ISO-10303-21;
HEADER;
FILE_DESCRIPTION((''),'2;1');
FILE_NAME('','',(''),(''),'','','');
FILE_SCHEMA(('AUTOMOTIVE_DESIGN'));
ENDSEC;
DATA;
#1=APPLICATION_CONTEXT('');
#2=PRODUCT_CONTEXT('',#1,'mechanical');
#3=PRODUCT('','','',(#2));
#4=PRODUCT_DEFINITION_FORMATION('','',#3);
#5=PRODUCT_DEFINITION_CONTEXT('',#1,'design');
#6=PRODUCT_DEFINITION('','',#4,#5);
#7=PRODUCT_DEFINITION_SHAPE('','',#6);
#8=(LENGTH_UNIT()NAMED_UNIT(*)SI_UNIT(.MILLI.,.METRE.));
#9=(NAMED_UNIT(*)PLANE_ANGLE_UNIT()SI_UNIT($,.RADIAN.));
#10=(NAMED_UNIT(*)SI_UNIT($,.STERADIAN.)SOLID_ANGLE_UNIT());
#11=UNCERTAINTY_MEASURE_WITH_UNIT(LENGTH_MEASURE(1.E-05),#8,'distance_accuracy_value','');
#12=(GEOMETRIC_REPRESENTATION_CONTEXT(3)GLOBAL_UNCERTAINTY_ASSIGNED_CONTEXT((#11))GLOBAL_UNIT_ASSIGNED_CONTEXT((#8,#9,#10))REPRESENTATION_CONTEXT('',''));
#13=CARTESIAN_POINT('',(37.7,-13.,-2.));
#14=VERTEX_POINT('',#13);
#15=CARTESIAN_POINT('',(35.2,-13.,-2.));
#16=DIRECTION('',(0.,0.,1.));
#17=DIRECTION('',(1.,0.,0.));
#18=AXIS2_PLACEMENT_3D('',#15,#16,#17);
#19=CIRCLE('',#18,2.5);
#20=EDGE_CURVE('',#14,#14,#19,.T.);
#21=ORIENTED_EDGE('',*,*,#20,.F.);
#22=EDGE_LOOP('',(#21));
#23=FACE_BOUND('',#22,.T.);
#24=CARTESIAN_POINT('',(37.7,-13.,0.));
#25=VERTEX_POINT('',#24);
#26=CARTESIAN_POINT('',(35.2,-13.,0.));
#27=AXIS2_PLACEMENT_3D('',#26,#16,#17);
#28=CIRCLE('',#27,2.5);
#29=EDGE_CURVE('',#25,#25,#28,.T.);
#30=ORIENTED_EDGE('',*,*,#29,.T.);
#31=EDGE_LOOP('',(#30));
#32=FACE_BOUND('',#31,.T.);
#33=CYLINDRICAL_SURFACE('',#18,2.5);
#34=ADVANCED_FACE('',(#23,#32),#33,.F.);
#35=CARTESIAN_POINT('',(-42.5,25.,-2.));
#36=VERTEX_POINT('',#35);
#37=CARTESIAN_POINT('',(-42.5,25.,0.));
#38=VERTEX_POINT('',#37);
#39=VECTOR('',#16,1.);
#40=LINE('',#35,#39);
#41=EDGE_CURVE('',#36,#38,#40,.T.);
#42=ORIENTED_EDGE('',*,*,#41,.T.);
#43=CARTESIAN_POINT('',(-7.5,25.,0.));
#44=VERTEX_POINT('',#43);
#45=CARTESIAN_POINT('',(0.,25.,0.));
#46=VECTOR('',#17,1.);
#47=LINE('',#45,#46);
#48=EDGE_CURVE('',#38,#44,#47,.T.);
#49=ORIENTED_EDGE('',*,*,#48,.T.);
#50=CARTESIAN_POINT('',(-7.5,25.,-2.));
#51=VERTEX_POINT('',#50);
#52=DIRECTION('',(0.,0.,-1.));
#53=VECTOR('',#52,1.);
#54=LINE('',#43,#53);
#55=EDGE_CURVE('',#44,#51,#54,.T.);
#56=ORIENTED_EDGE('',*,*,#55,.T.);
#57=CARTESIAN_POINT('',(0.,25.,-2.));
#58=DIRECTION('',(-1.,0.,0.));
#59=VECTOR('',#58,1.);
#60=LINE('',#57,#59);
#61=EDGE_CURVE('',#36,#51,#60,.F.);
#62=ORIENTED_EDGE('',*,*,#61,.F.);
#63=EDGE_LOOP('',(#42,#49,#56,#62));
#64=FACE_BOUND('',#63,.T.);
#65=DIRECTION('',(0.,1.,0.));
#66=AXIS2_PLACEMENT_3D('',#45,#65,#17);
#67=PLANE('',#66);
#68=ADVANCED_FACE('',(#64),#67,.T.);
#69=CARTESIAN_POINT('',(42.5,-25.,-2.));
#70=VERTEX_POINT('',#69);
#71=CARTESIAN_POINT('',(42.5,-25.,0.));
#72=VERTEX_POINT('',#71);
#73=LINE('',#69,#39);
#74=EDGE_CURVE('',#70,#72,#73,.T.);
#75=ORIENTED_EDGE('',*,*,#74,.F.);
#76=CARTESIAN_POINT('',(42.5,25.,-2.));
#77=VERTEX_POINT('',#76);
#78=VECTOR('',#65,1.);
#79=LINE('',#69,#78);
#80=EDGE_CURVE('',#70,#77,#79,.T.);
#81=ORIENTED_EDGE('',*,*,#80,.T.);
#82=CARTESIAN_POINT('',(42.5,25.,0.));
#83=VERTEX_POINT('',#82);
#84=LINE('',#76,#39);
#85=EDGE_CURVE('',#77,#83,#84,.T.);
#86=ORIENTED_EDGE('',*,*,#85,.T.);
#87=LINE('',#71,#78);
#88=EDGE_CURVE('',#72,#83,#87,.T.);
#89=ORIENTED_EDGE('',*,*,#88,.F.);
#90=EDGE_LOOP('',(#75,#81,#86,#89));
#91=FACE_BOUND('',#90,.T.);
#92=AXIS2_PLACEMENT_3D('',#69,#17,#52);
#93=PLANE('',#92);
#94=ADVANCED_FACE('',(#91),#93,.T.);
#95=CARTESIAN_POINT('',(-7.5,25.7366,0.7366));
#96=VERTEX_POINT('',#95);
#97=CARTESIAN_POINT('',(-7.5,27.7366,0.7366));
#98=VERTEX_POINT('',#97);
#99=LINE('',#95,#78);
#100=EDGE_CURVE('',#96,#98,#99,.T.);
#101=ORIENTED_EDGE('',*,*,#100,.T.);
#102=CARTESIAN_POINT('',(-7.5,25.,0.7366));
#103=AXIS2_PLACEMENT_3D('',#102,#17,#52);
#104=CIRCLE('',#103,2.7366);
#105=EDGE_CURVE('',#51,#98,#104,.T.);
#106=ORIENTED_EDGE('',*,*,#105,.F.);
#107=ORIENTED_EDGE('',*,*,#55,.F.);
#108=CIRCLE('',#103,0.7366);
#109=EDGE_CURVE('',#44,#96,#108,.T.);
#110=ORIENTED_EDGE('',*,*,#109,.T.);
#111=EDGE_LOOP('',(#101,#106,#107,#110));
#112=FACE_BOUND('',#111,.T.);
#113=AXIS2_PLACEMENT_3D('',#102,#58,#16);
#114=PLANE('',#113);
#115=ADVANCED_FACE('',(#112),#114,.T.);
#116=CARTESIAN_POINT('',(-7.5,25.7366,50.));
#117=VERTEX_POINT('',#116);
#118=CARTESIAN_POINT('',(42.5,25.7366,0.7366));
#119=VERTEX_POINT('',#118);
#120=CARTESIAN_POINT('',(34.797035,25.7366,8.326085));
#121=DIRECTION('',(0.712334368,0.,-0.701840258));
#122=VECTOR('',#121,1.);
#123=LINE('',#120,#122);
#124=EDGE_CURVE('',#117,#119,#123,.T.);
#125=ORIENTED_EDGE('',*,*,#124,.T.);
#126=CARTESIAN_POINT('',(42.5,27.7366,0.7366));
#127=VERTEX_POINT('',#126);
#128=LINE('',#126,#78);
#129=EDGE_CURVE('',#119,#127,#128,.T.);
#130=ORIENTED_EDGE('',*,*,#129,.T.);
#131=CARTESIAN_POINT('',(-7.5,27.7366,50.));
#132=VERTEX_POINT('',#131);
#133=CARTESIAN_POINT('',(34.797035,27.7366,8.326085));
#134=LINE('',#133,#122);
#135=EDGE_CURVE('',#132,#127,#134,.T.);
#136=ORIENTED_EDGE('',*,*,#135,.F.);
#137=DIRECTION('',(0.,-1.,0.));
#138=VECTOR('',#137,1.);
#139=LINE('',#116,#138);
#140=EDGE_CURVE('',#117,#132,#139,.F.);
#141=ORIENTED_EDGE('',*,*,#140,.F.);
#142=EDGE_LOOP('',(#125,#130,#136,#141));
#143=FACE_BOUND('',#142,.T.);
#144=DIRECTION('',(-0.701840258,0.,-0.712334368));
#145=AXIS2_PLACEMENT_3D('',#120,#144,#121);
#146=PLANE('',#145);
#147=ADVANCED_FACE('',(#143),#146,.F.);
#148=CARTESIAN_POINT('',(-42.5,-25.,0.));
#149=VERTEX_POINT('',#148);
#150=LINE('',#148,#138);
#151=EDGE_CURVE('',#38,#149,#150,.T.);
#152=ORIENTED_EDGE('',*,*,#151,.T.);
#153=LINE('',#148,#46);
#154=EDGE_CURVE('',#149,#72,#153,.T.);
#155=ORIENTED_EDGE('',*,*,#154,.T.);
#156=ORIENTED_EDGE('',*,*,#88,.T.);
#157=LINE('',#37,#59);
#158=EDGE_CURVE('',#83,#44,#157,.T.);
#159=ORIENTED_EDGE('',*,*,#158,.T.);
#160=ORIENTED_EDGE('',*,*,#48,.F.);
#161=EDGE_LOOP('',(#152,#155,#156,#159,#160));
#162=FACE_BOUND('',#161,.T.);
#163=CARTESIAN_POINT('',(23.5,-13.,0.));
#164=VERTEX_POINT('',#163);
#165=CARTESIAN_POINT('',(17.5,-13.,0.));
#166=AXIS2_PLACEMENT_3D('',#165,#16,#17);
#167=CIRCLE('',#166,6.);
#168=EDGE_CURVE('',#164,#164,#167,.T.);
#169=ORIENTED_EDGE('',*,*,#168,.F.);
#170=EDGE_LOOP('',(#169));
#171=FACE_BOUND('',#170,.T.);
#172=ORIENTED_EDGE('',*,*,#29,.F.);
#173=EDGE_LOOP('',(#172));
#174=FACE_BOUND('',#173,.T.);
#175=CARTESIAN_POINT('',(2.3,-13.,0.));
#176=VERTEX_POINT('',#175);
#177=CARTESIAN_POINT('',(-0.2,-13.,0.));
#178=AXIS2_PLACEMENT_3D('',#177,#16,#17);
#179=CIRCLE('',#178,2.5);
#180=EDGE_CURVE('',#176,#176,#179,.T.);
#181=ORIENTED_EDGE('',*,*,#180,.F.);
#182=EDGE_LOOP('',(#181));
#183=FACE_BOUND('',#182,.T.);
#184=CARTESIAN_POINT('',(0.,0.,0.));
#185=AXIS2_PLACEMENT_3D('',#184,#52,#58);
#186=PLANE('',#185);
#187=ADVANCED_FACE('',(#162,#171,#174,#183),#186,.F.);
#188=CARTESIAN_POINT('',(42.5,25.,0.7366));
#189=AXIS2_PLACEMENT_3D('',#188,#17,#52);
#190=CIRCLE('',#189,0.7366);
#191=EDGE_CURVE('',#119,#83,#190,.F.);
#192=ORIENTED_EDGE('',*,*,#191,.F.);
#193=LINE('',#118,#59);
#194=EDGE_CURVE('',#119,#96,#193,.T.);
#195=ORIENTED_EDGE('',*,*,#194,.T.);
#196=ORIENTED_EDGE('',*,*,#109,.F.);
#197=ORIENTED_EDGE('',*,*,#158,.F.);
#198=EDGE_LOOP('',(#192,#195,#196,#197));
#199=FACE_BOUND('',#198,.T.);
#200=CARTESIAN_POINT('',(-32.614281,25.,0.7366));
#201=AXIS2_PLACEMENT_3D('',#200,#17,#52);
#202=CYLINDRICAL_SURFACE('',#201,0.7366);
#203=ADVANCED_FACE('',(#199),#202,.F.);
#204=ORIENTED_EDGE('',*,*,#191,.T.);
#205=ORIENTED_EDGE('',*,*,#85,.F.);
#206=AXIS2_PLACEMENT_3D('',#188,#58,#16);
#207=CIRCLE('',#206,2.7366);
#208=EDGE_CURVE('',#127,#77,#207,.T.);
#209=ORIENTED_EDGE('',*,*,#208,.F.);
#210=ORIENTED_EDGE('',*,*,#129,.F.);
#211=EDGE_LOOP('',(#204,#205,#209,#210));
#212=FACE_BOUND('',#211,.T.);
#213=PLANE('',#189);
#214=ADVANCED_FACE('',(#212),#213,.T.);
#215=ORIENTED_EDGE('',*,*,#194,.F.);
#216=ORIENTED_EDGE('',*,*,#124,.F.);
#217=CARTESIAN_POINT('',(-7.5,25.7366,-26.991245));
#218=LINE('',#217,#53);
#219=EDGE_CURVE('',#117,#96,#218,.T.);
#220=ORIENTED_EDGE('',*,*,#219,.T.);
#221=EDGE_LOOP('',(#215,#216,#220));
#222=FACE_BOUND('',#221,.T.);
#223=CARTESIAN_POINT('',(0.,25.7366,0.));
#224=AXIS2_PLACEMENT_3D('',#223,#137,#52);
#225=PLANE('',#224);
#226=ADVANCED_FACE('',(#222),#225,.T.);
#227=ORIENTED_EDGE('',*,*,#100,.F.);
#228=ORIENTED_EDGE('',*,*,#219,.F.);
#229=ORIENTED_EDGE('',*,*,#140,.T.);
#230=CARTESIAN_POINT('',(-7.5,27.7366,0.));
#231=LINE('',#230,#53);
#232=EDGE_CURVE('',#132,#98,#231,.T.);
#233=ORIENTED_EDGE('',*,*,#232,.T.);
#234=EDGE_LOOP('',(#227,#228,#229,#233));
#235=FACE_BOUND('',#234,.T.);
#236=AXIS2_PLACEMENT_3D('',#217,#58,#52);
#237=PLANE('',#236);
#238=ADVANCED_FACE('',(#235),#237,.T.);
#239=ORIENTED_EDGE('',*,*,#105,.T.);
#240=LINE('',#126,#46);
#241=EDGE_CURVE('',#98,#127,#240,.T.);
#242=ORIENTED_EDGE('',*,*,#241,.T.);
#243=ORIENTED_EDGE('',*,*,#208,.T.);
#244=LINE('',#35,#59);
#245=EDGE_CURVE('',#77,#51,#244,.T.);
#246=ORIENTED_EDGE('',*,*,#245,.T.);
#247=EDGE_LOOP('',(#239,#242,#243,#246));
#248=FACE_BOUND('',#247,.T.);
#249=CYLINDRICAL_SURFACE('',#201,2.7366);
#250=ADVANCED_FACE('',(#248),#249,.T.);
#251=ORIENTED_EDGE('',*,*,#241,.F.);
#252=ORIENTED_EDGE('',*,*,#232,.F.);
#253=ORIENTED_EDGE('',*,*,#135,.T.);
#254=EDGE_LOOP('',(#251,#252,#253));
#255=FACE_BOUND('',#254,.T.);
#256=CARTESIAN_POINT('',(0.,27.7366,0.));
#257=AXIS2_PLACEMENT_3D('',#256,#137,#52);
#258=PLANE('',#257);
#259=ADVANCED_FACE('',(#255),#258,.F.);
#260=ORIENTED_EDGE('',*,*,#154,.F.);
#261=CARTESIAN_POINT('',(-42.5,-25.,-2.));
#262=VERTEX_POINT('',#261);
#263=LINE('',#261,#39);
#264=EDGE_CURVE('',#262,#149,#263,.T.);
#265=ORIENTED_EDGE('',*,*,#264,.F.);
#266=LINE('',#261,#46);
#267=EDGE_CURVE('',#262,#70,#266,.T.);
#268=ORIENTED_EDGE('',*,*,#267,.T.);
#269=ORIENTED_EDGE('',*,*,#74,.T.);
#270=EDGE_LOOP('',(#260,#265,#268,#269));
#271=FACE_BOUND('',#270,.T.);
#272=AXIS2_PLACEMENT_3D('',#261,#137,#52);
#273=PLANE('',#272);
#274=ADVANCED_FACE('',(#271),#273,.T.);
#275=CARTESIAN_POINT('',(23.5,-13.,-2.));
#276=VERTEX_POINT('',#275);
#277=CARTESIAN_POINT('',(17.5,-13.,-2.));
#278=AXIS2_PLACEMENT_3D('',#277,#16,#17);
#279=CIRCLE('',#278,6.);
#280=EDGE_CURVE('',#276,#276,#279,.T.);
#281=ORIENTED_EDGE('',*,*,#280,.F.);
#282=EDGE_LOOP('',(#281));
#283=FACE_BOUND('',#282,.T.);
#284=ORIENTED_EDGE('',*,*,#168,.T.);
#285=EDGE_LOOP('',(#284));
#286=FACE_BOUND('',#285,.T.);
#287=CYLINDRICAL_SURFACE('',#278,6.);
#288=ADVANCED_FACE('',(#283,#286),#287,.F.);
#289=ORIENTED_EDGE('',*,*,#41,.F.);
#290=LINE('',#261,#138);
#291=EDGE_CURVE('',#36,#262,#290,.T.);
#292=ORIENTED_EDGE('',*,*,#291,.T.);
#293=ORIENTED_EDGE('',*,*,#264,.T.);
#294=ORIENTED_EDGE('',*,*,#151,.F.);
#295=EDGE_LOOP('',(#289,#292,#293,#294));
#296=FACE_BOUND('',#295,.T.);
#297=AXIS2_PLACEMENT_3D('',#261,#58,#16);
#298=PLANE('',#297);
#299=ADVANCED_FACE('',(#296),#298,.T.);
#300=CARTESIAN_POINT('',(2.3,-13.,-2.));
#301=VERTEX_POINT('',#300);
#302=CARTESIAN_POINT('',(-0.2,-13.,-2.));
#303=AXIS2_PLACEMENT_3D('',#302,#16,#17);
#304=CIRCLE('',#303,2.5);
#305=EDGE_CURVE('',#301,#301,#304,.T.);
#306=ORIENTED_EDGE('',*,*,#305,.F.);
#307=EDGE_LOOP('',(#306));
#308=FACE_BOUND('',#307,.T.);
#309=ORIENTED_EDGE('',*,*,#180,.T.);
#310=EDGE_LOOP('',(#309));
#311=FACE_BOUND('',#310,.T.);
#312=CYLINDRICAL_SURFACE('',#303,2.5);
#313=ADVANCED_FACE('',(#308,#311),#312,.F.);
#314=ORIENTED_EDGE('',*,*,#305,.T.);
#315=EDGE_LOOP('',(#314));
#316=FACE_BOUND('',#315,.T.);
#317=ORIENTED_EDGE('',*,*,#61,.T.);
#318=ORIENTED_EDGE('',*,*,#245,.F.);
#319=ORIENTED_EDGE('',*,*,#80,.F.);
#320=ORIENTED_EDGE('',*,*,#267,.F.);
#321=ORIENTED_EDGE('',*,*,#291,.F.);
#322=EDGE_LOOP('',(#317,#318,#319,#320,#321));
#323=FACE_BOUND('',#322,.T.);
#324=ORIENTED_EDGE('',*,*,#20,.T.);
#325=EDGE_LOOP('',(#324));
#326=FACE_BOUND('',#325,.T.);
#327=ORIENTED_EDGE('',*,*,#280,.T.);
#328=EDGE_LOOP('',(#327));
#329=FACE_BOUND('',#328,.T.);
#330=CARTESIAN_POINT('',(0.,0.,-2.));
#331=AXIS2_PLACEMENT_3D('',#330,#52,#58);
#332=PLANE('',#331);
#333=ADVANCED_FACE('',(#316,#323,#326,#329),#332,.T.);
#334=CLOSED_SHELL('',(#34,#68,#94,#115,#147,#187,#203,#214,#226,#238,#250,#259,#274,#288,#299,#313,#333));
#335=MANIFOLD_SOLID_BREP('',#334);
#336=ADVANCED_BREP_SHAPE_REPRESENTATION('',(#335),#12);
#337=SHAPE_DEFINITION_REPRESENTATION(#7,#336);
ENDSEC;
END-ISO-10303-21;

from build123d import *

# Parameters (mm, degrees)
CROQUIS1_W             = 85
CROQUIS1_H             = 50
BRIDA_BASE1_DEPTH      = 2
BRIDA_DE_ARISTA1_DEPTH = 85
DESDOBLAR1_START       = -42.5
DESDOBLAR1_DEPTH       = 85
DESDOBLAR1_2_DEPTH     = 85
CROQUIS11_W            = 35
CROQUIS11_H            = 49.2634
CROQUIS11_H_2          = 2.727844901
CORTAR_EXTRUIR1_DEPTH  = 10
DOBLAR1_START          = 27.727844901
DOBLAR1_OUTLINE_W      = 50
DOBLAR1_OUTLINE_H      = 2
DOBLAR1_DEPTH          = 50.272155099
DOBLAR1_START_2        = 25.7366
DOBLAR1_2_DEPTH        = 1.725934706
DOBLAR1_START_3        = 25
DOBLAR1_3_DEPTH        = 2.7366
DOBLAR1_START_4        = -7.5
DOBLAR1_4_DEPTH        = 50.5
CROQUIS12_R            = 6
CROQUIS12_R_2          = 2.5
CORTAR_EXTRUIR2_DEPTH  = 10


with BuildPart() as part:
    # Brida base1: sheet metal written as solids
    # Croquis1 → Brida base1 (new body)
    with BuildSketch(Plane.XY):
        Rectangle(CROQUIS1_W, CROQUIS1_H)
    extrude(amount=-BRIDA_BASE1_DEPTH)

    # Brida de arista1: sheet metal written as solids
    # Brida de arista1 section (on a plane across the edge) → Brida de arista1 (add)
    with BuildSketch(Plane(origin=(42.5, 25.7366, 0), x_dir=(0, -1, 0), z_dir=(-1, 0, 0))):
        with BuildLine():
            Line((-2, 0.7366), (-2, 50))
            Line((-2, 50), (0, 50))
            Line((0, 50), (0, 0.7366))
            ThreePointArc((0, 0.7366), (0.215745145, 0.215745145), (0.7366, 0))
            Line((0.7366, 0), (0.7366, -2))
            ThreePointArc((0.7366, -2), (-1.198468417, -1.198468417), (-2, 0.7366))
        make_face()
    extrude(amount=BRIDA_DE_ARISTA1_DEPTH)

    # Desdoblar1: read off the stored shape, not the designer's step
    # Desdoblar1 outline → Desdoblar1 (cut)
    with BuildSketch(Plane.YZ.offset(DESDOBLAR1_START)):
        with BuildLine():
            Line((25, 0), (27.635602398, 0))
            ThreePointArc((27.635602398, 0), (27.711233029, 0.364854094), (27.7366, 0.7366))
            Line((27.7366, 0.7366), (27.7366, 50))
            Line((27.7366, 50), (25.7366, 50))
            Line((25.7366, 50), (25.7366, 0.7366))
            ThreePointArc((25.7366, 0.7366), (25.520854855, 0.215745145), (25, 0))
        make_face()
    extrude(amount=DESDOBLAR1_DEPTH, mode=Mode.SUBTRACT)

    # Desdoblar1 2 outline → Desdoblar1 2 (add)
    with BuildSketch(Plane.YZ.offset(DESDOBLAR1_START)):
        with BuildLine():
            Line((25, -2), (76.991244901, -2))
            Line((76.991244901, -2), (76.991244901, 0))
            Line((76.991244901, 0), (27.635602398, 0))
            ThreePointArc((27.635602398, 0), (26.654267209, -1.443395312), (25, -2))
        make_face()
    extrude(amount=DESDOBLAR1_2_DEPTH)

    # Croquis11 → Cortar-Extruir1 (cut)
    with BuildSketch(Plane.XY):
        with Locations((-25, 52.359544901)):
            Rectangle(CROQUIS11_W, CROQUIS11_H)
        with Locations((-25, 26.36392245)):
            Rectangle(CROQUIS11_W, CROQUIS11_H_2)
        Polygon((42.5, 76.991244901), (-7.5, 76.991244901), (42.5, 27.727844901), align=None)
    extrude(amount=-CORTAR_EXTRUIR1_DEPTH, mode=Mode.SUBTRACT)

    # Doblar1: read off the stored shape, not the designer's step
    # Doblar1 outline → Doblar1 (cut)
    with BuildSketch(Plane(origin=(0, 0, 0), x_dir=(1, 0, 0), z_dir=(0, 1, 0)).offset(DOBLAR1_START)):
        with Locations((17.5, 1)):
            Rectangle(DOBLAR1_OUTLINE_W, DOBLAR1_OUTLINE_H)
    extrude(amount=DOBLAR1_DEPTH, mode=Mode.SUBTRACT)

    # Doblar1 2 outline → Doblar1 2 (add)
    with BuildSketch(Plane(origin=(0, 0, 0), x_dir=(1, 0, 0), z_dir=(0, 1, 0)).offset(DOBLAR1_START_2)):
        Polygon((-7.5, -50), (42.5, -0.7366), (42.5, 0), (-7.5, 0), align=None)
    extrude(amount=DOBLAR1_2_DEPTH)

    # Doblar1 3 outline → Doblar1 3 (add)
    with BuildSketch(Plane(origin=(0, 0, 0), x_dir=(1, 0, 0), z_dir=(0, 1, 0)).offset(DOBLAR1_START_3)):
        Polygon((-7.5, 0), (-7.5, -50), (42.5, -0.7366), (42.5, 0), align=None)
    extrude(amount=DOBLAR1_3_DEPTH)

    # Doblar1 4 outline → Doblar1 4 (cut)
    with BuildSketch(Plane.YZ.offset(DOBLAR1_START_4)):
        with BuildLine():
            ThreePointArc((27.7366, 0.7366), (26.935068417, -1.198468417), (25, -2))
            Line((25, -2), (24, -2))
            Line((24, -2), (24, -4))
            Line((24, -4), (27.727844901, -4))
            Line((27.727844901, -4), (27.727844901, 0))
            Line((27.727844901, 0), (29, 0))
            Line((29, 0), (29, 52))
            Line((29, 52), (27.736600025, 52))
            Line((27.736600025, 52), (27.7366, 0.7366))
        make_face()
        with BuildLine():
            Line((25.7366, 0.7366), (25.7366, 52))
            Line((25.7366, 52), (25, 52))
            Line((25, 52), (25, 0))
            ThreePointArc((25, 0), (25.520854855, 0.215745145), (25.7366, 0.7366))
        make_face()
    extrude(amount=DOBLAR1_4_DEPTH, mode=Mode.SUBTRACT)

    # Croquis12 → Cortar-Extruir2 (cut)
    with BuildSketch(Plane.XY):
        with Locations((17.5, -13)):
            Circle(CROQUIS12_R)
        with Locations((35.2, -13)):
            Circle(CROQUIS12_R_2)
        with Locations((-0.2, -13)):
            Circle(CROQUIS12_R_2)
    extrude(amount=-CORTAR_EXTRUIR2_DEPTH, mode=Mode.SUBTRACT)


solid = part.part
